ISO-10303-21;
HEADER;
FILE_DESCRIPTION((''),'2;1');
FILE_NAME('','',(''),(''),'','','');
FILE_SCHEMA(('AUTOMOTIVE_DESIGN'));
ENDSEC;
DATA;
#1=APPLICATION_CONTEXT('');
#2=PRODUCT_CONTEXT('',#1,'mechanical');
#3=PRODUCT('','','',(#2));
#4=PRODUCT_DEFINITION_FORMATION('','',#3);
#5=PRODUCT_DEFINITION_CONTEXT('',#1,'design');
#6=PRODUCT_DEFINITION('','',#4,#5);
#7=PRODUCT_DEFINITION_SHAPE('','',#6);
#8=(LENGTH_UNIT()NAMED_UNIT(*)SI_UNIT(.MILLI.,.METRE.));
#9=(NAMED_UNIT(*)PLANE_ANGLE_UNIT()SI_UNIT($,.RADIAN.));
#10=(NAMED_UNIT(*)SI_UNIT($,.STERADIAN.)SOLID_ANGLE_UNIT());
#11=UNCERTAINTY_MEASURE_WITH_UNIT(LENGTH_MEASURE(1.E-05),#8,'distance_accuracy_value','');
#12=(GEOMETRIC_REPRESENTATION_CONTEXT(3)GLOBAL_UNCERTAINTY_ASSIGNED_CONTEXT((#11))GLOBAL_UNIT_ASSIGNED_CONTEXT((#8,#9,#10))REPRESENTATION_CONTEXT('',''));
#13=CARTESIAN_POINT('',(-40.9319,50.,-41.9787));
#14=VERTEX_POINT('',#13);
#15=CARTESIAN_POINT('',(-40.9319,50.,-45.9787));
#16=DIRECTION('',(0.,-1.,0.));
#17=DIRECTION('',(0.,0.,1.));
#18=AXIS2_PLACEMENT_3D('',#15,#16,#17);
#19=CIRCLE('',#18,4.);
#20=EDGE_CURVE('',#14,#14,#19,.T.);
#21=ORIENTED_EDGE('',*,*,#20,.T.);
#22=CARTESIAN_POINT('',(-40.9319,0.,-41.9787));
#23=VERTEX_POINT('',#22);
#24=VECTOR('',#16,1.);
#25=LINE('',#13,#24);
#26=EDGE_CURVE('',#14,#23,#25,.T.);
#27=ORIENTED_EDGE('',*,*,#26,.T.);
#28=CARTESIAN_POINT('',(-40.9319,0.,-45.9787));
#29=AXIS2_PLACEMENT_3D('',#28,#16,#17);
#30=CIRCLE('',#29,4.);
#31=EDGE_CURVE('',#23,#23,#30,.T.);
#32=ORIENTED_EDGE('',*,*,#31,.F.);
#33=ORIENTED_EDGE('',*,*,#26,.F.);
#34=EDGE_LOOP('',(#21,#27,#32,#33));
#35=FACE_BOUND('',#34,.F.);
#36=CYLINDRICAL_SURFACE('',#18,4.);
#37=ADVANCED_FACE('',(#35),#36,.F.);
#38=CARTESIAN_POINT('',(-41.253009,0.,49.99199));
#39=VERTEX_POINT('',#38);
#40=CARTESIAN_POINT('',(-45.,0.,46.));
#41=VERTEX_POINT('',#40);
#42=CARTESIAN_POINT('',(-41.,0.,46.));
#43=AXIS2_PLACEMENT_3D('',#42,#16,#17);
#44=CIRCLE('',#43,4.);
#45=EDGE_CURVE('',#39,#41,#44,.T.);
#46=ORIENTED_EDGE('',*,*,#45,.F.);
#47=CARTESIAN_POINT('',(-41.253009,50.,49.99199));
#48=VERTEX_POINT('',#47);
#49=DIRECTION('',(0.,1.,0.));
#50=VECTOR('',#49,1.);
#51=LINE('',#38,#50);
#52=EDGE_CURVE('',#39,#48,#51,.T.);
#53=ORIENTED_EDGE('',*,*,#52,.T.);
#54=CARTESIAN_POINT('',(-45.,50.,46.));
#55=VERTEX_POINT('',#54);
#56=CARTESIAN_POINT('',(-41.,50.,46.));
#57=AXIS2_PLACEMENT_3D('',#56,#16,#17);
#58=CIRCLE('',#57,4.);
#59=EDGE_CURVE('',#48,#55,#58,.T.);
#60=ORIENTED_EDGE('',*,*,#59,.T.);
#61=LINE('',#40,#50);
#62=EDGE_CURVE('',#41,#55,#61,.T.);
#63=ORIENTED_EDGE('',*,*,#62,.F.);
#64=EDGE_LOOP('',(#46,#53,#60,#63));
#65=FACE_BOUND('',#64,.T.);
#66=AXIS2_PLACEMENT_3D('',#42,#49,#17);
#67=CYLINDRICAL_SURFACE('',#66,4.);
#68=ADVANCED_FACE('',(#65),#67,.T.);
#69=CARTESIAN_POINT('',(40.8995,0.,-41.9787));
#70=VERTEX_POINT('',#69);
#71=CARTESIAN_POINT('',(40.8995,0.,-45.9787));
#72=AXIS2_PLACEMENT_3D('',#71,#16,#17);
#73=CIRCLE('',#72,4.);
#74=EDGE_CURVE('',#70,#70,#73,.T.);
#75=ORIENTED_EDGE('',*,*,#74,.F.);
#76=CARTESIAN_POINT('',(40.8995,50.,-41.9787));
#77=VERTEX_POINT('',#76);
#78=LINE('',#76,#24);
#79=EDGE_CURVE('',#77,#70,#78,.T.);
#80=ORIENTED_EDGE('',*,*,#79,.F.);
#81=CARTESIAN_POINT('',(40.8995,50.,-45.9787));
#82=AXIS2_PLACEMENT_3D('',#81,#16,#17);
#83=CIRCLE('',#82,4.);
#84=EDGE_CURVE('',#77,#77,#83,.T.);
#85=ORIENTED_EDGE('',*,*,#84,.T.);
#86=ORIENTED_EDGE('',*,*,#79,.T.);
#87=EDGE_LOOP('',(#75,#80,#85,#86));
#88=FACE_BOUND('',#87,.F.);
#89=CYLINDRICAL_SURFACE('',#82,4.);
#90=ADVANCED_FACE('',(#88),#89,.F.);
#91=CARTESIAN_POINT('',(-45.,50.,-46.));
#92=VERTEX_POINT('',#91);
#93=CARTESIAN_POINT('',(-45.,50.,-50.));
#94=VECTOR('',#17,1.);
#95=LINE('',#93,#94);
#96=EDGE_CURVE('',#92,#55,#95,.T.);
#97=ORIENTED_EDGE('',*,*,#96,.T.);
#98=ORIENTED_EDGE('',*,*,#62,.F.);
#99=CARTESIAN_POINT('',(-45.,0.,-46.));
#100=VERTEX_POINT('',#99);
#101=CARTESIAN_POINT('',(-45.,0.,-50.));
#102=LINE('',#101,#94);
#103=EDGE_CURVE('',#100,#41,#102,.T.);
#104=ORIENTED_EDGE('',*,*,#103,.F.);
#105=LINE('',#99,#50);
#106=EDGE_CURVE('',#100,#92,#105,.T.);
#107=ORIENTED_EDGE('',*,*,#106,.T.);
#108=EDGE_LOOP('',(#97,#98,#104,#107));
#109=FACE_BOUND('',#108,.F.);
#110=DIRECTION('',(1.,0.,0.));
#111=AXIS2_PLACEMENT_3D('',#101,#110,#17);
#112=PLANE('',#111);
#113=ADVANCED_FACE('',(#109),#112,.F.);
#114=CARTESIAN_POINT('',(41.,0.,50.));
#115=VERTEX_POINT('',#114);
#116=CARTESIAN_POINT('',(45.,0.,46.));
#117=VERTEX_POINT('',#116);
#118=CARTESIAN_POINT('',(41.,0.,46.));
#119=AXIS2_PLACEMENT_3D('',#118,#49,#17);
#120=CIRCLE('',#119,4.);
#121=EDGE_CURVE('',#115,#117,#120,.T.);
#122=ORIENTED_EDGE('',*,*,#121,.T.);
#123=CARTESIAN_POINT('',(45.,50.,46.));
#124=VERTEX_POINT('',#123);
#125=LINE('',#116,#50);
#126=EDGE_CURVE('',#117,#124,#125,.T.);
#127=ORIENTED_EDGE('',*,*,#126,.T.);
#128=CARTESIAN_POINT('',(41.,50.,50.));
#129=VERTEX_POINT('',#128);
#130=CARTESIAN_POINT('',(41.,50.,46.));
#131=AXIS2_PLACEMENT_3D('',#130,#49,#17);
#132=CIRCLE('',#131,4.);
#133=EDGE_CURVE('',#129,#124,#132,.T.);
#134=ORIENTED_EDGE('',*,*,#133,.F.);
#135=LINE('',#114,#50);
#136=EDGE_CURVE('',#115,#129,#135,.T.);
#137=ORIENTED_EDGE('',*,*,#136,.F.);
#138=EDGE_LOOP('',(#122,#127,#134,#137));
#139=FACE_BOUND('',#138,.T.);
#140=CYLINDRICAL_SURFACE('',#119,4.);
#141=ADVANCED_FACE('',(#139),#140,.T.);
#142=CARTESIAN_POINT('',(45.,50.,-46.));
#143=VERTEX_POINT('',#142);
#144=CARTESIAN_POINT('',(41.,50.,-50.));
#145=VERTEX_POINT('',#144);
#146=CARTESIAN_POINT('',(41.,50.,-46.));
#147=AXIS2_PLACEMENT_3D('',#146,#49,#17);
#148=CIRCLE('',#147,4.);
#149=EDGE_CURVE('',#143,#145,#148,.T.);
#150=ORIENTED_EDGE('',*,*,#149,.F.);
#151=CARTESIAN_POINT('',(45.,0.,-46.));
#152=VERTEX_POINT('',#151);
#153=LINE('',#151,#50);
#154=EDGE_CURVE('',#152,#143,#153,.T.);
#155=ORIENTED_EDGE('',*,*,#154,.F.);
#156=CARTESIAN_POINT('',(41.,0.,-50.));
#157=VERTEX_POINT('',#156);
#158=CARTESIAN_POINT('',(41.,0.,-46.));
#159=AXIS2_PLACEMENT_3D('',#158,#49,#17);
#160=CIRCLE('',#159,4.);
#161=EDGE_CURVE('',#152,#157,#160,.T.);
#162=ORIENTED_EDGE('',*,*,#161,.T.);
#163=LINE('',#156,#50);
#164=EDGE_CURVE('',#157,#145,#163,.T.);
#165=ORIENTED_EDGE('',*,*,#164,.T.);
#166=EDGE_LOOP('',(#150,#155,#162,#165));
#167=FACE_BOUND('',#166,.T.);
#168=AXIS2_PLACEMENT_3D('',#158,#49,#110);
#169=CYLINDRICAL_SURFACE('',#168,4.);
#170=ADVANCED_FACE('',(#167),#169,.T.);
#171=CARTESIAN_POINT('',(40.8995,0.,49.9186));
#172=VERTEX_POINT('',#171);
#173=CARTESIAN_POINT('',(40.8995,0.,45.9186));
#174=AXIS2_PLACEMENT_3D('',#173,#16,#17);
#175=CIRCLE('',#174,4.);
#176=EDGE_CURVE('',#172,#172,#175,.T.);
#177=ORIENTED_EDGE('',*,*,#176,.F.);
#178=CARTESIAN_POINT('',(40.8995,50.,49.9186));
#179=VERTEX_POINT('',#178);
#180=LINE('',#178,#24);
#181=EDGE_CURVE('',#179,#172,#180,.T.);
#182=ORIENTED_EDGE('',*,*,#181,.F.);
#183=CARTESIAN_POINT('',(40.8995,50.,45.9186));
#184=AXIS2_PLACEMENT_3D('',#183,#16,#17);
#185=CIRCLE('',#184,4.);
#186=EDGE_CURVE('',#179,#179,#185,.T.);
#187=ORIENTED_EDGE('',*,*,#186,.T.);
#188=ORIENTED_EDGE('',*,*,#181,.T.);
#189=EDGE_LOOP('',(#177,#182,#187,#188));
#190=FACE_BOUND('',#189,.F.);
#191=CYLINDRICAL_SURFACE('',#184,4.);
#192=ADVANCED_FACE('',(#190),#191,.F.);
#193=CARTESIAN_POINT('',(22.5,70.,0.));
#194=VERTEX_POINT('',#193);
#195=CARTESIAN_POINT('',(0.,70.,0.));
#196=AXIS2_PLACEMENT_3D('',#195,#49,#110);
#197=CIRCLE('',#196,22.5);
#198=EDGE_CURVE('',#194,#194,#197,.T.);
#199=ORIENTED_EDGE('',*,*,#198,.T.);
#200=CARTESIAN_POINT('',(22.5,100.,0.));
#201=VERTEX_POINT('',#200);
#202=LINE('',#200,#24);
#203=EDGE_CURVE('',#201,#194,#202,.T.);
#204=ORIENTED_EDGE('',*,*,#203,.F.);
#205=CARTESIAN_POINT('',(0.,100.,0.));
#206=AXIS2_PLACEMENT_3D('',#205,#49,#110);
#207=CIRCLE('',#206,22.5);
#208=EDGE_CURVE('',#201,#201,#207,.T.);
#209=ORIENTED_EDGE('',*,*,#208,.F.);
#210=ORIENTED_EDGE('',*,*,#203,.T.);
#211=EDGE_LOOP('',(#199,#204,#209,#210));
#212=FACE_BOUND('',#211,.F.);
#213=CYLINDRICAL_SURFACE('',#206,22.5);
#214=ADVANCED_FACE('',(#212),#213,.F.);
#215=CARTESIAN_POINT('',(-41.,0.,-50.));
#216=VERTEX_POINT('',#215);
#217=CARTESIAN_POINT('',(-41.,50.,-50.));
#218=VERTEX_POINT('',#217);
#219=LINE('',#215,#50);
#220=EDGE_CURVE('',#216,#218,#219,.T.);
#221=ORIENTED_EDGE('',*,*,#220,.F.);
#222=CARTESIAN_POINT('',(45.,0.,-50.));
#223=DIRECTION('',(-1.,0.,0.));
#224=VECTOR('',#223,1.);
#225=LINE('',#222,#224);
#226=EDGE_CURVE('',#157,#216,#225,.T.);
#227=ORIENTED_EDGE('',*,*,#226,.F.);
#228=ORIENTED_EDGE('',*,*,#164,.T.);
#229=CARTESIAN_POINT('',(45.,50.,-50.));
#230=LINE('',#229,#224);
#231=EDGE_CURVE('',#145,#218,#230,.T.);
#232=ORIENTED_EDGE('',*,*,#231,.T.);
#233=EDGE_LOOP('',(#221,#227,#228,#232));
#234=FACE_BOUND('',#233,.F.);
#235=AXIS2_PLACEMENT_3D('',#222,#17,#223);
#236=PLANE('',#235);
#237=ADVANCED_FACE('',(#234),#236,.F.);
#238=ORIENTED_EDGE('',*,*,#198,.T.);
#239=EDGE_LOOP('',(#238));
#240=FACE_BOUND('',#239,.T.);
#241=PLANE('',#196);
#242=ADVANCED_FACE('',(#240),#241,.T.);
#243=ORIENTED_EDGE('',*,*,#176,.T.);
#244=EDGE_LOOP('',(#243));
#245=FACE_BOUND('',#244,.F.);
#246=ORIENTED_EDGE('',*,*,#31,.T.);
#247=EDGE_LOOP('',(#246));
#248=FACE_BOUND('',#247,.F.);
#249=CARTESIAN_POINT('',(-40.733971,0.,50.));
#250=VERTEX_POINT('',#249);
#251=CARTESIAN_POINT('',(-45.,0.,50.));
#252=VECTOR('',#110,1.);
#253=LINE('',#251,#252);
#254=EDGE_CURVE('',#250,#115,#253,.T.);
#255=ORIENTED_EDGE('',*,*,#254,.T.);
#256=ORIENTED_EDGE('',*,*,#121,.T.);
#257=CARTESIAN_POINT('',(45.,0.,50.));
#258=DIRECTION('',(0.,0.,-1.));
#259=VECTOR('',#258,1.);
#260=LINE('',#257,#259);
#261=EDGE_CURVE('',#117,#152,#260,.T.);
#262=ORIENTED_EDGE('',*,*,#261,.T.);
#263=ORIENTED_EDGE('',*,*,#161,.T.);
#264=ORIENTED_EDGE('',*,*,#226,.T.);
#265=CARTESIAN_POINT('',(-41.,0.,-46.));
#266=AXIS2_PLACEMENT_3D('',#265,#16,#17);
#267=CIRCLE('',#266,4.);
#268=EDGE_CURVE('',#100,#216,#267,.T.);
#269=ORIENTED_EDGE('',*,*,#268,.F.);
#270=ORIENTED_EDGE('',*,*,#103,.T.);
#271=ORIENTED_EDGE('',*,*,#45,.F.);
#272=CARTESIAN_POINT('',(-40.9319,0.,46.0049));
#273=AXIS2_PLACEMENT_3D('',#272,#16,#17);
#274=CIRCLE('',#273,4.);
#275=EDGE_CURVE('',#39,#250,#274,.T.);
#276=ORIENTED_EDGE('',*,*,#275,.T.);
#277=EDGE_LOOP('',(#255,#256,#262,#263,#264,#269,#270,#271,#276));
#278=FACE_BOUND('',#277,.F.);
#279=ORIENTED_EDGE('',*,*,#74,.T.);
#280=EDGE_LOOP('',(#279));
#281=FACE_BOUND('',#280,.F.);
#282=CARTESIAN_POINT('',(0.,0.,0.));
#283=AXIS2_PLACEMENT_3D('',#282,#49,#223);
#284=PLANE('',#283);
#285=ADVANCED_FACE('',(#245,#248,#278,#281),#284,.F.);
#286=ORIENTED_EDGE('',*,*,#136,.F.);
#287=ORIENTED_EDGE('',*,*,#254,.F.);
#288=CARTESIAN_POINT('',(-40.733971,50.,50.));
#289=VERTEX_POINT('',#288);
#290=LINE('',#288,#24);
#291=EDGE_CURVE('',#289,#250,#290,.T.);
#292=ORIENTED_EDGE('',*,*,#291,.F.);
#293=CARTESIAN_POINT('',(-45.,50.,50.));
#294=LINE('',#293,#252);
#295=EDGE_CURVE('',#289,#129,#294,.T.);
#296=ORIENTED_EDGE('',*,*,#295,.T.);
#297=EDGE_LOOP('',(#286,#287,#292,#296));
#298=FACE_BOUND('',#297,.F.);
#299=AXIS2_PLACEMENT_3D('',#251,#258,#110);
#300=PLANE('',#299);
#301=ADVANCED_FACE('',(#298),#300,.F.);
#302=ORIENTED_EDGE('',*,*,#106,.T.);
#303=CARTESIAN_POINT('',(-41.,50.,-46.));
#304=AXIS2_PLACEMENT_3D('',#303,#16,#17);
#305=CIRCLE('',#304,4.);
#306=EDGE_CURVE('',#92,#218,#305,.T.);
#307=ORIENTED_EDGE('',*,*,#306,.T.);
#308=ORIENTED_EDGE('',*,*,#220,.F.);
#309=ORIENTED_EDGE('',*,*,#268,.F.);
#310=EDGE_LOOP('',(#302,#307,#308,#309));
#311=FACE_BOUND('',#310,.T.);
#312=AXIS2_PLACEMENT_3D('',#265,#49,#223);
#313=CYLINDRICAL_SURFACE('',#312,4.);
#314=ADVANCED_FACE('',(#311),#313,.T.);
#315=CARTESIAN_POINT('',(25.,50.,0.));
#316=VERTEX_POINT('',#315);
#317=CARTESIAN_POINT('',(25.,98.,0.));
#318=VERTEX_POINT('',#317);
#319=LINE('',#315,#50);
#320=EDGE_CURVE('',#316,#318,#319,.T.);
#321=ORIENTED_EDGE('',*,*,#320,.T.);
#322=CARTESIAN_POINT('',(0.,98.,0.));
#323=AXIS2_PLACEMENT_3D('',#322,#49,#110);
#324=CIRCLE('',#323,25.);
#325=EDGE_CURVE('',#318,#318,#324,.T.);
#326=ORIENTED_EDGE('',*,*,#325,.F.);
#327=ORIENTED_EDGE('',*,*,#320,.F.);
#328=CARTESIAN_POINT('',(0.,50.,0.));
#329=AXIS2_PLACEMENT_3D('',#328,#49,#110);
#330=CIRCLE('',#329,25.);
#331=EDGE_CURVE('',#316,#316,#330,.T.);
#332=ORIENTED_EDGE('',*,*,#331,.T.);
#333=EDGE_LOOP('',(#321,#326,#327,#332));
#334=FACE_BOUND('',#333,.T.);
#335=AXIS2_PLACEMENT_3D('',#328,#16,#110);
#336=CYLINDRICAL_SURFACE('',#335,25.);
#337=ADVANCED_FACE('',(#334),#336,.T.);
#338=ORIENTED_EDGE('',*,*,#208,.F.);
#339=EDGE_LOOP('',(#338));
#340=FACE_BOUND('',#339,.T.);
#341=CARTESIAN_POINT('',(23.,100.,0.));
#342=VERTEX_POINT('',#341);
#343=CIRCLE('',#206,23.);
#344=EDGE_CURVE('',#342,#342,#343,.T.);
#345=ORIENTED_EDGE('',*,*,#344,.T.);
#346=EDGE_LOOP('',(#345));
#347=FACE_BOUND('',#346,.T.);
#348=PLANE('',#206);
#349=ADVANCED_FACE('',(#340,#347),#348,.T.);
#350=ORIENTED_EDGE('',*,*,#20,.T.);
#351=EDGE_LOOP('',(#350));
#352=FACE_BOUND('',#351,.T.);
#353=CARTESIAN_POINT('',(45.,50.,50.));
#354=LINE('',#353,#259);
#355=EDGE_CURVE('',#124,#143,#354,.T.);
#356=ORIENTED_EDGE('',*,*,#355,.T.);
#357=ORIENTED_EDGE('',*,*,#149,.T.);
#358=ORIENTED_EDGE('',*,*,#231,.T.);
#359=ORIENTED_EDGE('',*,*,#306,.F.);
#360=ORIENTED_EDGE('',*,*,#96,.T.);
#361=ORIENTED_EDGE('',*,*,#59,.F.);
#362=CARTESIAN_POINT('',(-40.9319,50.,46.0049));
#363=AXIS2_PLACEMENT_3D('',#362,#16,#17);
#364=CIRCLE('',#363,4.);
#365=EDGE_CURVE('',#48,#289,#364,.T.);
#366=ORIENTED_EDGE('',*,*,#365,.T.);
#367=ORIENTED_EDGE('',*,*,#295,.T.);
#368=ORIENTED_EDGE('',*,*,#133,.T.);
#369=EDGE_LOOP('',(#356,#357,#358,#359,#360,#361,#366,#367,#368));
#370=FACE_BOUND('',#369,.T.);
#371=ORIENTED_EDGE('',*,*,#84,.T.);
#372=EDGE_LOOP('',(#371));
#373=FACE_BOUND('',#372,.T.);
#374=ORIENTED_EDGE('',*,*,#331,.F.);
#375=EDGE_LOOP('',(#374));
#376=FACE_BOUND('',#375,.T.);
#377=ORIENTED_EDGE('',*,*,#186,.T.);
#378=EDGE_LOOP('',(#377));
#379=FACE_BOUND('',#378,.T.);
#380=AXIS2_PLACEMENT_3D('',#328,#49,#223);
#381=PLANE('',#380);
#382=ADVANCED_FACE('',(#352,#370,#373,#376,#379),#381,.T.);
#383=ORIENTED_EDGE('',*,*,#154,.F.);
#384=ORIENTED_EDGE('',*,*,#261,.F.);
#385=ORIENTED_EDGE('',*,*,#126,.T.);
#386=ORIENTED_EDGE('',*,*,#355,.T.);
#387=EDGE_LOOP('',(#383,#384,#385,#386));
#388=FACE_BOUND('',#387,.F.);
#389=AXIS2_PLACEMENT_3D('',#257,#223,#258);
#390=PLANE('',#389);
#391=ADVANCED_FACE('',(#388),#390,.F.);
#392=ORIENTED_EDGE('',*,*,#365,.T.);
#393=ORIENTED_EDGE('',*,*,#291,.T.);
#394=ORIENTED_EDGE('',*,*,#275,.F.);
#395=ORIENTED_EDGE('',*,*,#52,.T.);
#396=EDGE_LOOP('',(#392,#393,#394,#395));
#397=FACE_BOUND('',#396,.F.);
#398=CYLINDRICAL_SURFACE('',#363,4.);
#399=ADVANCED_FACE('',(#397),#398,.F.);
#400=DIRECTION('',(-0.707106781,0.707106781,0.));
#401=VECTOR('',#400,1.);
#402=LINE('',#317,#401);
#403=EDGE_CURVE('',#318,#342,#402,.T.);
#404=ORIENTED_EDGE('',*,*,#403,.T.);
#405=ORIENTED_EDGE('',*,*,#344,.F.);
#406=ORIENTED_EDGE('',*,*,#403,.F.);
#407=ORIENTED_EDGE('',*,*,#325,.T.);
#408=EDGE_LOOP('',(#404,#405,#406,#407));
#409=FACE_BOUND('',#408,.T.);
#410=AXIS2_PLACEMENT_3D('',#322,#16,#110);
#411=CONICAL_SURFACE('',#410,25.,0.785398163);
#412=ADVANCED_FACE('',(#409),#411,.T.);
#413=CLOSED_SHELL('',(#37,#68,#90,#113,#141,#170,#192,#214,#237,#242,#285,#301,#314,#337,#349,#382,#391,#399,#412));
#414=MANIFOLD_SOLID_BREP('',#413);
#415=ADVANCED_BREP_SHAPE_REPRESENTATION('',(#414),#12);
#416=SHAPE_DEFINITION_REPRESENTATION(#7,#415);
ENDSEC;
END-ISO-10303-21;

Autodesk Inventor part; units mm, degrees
ref_plane "YZ Plane" through (0, 0, 0) normal (1, 0, 0) x (0, 1, 0)
ref_plane "XZ Plane" through (0, 0, 0) normal (0, 1, 0) x (-1, 0, 0)
ref_plane "XY Plane" through (0, 0, 0) normal (0, 0, 1) x (1, 0, 0)
sketch "Sketch1" plane through (0, 0, 0) normal (0, 1, 0) x (-1, 0, 0)
  line L0 (45, 50) -> (-45, 50)
  line L1 (-45, 50) -> (-45, -50)
  line L2 (-45, -50) -> (45, -50)
  line L3 (45, -50) -> (45, 50)
  line L4 (45, 50) -> (-45, -50) construction
  line L5 (-45, 50) -> (45, -50) construction
  point P0 (0, 0)
  point P1 (42.3062, 47.0069)
  point P2 (42.3062, -47.0069)
  point P3 (-42.3062, -47.0069)
  point P4 (-42.3062, 47.0069)
  dimension "d0" = 90
  dimension "d1" = 100
extrude "Extrusion1" add sketch "Sketch1" along normal blind 50
sketch "Sketch2" plane through (0, 50, 0) normal (0, 1, 0) x (1, 0, 0)
  circle A0 centre (0, 0) radius 25
  dimension "d5" = 50
extrude "Extrusion2" add sketch "Sketch2" along normal blind 50
sketch "Sketch3" plane through (0, 50, 0) normal (0, 1, 0) x (1, 0, 0)
  point P0 (0, 0)
fillet "Fillet1" radius 4 1 edges at (45, 25, 50)
fillet "Fillet2" radius 4 3 edges at (-45, 25, 50) (45, 25, -50) (-45, 25, -50)
sketch "Sketch4" plane through (0, 50, 0) normal (0, 1, 0) x (1, 0, 0)
  circle A0 centre (-40.9319, 45.9787) radius 4
  circle A1 centre (40.8995, 45.9787) radius 4
  circle A2 centre (40.8995, -45.9186) radius 4
  circle A3 centre (-40.9319, -46.0049) radius 4
  point P0 (0, 0)
  dimension "d20" = 8
  dimension "d21" = 8
  dimension "d22" = 8
  dimension "d23" = 8
sketch "Sketch5" plane through (0, 50, 0) normal (0, 1, 0) x (1, 0, 0)
  circle A0 centre (0, 0) radius 22.5
  dimension "d16" = 45
sketch "Sketch6" plane through (0, 100, 0) normal (0, 1, 0) x (1, 0, 0)
  circle A0 centre (0, 0) radius 22.5
  dimension "d17" = 45
extrude "Extrusion3" cut sketch "Sketch6" against normal blind 30
sketch "Sketch7" plane through (0, 50, 0) normal (0, 1, 0) x (1, 0, 0)
  point P0 (0, 0)
sketch "Sketch8" plane through (0, 50, 0) normal (0, 1, 0) x (1, 0, 0)
  point P0 (0, 0)
hole "Hole1" at (40.8995, 50, 45.9186) direction (0, -1, 0) diameter 8 end through all
hole "Hole2" at (40.8995, 50, -45.9787) direction (0, -1, 0) diameter 8 end through all
hole "Hole3" at (-40.9319, 50, 46.0049) direction (0, -1, 0) diameter 8 end through all
hole "Hole4" at (-40.9319, 50, -45.9787) direction (0, -1, 0) diameter 8 end through all
thread "Thread1" size "M8x1.25" class "6H" standard "ANSI Metric M Profile" full length
thread "Thread2" size "M8x1.25" class "6H" standard "ANSI Metric M Profile" full length
thread "Thread3" size "M8x1.25" class "6H" standard "ANSI Metric M Profile" full length
thread "Thread4" size "M8x1.25" class "6H" standard "ANSI Metric M Profile" full length
chamfer "Chamfer1" distance 2 angle 45 1 edges at (-25, 100, 0)
properties part number "Práctica en Clase"
